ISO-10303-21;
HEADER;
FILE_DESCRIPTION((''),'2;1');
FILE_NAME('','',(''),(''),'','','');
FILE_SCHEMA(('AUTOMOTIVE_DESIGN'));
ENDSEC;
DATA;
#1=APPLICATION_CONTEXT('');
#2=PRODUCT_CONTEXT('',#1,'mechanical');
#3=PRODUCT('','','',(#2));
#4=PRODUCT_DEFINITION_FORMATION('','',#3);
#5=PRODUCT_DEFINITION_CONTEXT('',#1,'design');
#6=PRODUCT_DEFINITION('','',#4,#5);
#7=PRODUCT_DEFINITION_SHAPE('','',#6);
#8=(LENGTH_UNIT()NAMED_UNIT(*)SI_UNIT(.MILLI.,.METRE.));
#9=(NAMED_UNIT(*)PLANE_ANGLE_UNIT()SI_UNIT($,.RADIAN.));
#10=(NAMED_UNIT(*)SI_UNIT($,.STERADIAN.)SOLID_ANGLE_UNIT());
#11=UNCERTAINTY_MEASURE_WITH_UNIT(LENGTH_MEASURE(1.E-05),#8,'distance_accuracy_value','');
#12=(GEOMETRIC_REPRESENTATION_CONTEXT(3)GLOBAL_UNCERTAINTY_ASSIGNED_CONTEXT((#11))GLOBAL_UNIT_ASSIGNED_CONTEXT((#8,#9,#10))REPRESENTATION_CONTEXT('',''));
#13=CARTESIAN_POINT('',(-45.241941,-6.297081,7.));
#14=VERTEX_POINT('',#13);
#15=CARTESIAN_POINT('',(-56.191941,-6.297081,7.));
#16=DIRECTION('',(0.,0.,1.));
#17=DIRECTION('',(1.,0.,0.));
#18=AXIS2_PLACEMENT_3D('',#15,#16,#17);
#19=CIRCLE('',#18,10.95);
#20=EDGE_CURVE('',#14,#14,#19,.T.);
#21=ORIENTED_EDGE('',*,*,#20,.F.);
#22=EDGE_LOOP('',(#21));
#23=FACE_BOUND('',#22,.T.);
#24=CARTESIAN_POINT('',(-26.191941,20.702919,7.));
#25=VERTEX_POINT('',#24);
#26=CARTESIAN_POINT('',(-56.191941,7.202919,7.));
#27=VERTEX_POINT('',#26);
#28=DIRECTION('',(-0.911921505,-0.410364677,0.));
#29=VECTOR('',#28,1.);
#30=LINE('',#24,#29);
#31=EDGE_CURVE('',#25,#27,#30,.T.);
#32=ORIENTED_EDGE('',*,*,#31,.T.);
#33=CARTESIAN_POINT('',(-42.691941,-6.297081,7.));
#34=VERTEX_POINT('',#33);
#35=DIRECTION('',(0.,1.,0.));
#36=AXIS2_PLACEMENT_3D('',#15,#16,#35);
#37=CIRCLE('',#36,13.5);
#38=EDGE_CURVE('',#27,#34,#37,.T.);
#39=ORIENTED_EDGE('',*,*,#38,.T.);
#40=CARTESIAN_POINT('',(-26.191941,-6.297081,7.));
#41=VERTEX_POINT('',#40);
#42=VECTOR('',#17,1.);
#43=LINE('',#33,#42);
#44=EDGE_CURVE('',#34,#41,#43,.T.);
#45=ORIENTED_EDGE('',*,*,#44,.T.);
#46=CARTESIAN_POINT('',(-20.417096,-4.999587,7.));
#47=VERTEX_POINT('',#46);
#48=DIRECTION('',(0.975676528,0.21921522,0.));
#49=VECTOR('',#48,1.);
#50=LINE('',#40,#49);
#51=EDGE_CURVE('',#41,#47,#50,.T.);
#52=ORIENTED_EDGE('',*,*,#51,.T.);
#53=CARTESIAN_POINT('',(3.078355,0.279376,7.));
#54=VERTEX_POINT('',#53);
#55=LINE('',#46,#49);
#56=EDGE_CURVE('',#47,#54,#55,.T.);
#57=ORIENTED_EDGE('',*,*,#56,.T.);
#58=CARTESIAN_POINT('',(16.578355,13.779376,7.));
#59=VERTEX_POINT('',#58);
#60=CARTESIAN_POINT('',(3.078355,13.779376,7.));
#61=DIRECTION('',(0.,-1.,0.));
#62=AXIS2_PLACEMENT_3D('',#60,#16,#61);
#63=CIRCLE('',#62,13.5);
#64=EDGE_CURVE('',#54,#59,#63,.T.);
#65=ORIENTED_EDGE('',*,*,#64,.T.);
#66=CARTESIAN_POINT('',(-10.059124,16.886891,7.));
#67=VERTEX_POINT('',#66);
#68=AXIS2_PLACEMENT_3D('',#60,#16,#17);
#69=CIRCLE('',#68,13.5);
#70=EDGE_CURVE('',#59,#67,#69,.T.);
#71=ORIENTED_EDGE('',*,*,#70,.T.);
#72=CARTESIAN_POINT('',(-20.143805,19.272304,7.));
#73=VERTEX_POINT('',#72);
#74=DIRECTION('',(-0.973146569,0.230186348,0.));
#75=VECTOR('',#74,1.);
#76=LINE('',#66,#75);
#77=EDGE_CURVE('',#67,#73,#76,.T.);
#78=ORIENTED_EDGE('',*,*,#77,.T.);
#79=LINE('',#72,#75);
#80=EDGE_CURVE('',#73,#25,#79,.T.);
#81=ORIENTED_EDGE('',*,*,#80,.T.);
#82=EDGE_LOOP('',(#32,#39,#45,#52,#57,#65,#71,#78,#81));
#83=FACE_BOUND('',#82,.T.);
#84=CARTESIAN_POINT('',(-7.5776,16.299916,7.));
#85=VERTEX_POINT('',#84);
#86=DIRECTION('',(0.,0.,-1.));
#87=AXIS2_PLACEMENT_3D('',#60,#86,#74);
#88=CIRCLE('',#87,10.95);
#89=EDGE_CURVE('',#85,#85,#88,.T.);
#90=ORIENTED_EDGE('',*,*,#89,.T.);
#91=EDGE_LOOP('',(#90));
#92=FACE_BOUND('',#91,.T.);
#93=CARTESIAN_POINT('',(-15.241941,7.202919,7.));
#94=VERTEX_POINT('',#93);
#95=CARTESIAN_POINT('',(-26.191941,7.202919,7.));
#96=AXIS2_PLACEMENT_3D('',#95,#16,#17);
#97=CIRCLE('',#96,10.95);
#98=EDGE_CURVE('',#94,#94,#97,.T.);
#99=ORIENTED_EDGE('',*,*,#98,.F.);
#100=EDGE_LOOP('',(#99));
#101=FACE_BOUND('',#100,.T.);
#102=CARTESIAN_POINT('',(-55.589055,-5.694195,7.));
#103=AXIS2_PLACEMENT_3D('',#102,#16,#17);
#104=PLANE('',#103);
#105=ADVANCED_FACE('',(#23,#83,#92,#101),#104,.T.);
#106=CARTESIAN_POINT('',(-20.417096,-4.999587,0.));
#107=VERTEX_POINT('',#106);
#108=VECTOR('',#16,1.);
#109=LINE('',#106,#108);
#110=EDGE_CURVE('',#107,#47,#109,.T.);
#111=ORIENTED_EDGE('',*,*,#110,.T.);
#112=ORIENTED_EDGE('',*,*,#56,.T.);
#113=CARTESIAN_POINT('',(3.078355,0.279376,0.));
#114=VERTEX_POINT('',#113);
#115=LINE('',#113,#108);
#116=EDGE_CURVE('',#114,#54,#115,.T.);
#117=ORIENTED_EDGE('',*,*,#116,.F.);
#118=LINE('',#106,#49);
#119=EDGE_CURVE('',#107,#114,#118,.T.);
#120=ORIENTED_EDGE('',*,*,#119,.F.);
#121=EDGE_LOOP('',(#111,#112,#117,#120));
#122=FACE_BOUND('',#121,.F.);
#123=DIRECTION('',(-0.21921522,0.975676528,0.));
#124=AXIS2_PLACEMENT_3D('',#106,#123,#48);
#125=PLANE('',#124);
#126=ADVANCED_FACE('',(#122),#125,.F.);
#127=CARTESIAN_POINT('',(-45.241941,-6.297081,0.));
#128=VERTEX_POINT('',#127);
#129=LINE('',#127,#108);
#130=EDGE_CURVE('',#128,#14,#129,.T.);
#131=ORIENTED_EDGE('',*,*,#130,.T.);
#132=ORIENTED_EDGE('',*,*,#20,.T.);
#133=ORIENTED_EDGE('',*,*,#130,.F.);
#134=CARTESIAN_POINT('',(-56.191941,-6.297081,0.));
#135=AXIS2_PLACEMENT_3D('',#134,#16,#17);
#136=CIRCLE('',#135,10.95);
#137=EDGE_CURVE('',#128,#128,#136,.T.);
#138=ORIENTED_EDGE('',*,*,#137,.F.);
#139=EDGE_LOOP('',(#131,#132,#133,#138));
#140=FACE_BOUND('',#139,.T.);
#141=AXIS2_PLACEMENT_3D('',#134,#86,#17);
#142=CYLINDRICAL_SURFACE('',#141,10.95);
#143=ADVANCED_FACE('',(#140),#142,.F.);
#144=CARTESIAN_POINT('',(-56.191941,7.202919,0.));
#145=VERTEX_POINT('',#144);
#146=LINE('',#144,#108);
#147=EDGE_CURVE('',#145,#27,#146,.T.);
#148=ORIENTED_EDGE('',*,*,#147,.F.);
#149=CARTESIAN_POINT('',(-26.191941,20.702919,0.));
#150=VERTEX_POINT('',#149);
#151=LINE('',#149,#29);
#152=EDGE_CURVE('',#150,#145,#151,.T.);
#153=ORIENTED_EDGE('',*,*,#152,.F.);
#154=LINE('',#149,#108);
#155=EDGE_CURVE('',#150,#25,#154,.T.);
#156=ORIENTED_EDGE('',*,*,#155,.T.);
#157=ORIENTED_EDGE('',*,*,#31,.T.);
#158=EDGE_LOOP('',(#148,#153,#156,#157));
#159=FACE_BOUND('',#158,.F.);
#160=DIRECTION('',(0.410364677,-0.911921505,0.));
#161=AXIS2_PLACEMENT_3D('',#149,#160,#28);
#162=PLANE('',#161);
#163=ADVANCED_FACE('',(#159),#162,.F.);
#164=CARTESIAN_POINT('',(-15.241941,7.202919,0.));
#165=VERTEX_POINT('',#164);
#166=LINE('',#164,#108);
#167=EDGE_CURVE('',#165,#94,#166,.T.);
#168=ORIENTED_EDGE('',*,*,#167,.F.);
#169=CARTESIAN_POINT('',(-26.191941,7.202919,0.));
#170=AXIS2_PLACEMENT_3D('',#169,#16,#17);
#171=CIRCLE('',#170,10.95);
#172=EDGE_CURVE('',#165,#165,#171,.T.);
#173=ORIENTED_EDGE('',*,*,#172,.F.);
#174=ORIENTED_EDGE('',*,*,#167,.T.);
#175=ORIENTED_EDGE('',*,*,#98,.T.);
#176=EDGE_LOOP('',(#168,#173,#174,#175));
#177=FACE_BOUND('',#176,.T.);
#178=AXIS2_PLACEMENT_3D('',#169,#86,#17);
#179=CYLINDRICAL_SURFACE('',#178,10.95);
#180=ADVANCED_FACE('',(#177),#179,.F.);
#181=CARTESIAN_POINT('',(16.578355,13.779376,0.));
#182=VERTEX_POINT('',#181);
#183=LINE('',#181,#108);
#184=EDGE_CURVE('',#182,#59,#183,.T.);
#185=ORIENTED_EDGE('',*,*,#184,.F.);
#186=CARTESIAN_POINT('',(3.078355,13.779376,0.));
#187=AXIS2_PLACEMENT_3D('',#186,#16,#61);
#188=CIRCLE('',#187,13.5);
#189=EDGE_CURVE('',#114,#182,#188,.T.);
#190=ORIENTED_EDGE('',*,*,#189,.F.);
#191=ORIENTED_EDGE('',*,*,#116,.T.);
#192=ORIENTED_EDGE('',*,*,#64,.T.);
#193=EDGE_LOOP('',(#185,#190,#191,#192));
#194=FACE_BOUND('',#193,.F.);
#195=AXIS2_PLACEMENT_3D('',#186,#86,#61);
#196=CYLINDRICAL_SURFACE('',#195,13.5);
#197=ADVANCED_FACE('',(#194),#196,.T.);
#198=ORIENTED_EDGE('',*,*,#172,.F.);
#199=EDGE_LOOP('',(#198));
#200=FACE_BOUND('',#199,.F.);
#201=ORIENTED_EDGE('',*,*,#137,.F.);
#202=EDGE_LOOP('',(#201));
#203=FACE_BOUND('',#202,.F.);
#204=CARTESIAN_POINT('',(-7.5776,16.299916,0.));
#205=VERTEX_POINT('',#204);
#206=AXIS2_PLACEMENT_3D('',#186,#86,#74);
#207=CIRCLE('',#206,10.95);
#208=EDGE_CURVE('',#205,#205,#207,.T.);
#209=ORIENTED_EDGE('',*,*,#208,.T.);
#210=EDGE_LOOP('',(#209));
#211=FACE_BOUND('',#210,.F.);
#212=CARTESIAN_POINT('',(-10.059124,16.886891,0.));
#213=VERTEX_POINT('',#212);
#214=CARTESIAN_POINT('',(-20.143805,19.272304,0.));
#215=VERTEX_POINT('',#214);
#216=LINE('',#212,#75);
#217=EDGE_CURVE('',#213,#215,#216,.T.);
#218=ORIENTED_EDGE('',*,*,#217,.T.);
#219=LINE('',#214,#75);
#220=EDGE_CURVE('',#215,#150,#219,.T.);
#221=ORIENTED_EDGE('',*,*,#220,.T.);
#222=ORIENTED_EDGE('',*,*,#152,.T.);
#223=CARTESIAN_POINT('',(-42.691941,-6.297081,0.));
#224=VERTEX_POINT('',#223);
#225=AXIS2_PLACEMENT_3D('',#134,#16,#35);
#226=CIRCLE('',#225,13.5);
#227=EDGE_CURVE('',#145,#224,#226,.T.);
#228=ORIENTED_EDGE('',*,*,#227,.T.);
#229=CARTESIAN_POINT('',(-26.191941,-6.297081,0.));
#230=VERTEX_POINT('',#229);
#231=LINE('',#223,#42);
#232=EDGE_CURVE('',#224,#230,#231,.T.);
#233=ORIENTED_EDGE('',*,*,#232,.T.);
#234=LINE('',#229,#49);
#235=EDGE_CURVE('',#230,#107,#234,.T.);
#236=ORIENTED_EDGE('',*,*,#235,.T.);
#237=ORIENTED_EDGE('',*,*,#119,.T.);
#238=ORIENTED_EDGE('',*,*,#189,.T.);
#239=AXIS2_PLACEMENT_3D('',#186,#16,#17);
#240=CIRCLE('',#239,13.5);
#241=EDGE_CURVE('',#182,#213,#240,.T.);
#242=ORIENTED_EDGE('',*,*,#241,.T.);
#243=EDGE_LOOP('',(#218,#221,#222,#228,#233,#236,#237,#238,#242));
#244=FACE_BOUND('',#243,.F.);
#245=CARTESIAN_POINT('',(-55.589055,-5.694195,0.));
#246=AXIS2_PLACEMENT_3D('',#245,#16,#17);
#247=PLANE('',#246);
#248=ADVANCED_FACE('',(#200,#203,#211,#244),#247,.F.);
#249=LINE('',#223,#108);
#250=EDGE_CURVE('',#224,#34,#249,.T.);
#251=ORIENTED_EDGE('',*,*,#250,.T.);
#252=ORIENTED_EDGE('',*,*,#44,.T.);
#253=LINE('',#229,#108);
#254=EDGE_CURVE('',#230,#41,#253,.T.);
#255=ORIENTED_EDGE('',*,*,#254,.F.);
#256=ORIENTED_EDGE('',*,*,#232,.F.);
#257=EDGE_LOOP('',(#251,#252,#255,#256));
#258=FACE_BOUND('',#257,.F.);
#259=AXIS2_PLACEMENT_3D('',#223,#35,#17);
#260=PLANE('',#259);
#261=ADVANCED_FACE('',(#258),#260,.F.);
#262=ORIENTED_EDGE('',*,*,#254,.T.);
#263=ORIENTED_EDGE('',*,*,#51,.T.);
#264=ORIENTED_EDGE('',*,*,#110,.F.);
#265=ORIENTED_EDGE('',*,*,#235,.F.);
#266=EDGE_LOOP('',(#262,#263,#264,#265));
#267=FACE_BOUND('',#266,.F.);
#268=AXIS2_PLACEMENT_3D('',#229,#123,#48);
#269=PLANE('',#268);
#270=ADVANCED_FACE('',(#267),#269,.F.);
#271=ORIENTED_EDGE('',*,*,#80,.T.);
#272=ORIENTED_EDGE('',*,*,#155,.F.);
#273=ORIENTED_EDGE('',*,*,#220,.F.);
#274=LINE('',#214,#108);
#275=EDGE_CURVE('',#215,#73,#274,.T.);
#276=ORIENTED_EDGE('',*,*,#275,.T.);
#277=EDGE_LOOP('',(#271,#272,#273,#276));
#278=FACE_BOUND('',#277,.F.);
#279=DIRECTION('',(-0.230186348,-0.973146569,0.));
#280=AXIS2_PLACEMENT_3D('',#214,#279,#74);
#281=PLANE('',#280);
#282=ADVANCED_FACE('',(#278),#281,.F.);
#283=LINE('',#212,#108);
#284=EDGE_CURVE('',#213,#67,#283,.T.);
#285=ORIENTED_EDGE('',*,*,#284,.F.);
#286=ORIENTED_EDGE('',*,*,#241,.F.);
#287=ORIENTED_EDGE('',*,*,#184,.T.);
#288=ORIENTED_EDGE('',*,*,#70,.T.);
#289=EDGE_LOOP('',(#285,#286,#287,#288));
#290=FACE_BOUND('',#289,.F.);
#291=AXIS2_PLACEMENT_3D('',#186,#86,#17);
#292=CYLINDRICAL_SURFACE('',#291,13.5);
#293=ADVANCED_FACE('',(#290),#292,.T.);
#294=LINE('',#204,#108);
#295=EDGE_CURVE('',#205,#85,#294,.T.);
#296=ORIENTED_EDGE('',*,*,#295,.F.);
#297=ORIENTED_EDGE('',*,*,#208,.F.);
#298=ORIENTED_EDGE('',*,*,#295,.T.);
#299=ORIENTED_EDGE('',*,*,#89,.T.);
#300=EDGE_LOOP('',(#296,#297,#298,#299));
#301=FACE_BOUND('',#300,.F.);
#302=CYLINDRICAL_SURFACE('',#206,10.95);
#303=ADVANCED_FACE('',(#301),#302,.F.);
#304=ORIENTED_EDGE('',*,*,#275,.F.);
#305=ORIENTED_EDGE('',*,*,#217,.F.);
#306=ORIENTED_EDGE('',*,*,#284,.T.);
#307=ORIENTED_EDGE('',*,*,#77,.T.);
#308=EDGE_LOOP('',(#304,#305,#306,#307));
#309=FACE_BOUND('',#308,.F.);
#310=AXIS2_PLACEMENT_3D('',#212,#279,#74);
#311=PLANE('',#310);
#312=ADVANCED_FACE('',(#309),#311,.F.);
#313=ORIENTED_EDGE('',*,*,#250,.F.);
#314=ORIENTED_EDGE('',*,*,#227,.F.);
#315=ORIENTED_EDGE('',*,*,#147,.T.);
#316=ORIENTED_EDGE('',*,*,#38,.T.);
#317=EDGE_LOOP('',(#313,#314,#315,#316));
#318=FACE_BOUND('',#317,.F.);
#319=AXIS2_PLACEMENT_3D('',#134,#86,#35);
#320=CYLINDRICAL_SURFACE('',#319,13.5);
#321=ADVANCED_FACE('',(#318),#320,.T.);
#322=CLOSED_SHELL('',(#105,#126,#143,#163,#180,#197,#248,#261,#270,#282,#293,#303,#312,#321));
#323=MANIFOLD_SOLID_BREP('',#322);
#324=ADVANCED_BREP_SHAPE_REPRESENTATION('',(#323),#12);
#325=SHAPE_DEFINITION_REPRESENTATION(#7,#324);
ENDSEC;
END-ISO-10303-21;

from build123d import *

# Parameters (mm, degrees)
F0_R     = 10.95
F1_DEPTH = 7


# Not quite as in the source:
# - a feature names something its author has since deleted; it is built from what else it names


with BuildPart() as f1:
    # F0 (on Top) → F1 (new body)
    with BuildSketch(Plane.XY):
        with BuildLine():
            ThreePointArc((-56.191941013, 7.2029190708), (-65.7378825591, -15.8430224752), (-42.691941013, -6.2970809292))
            ThreePointArc((-42.691941013, -6.2970809292), (-46.645999467, 3.2488606168), (-56.191941013, 7.2029190708))
        make_face()
        with Locations((-56.191941013, -6.2970809292)):
            Circle(F0_R, mode=Mode.SUBTRACT)
        with BuildLine():
            Line((-42.691941013, -6.2970809292), (-26.191941013, -6.2970809292))
            ThreePointArc((-26.191941013, -6.2970809292), (-38.5028813329, 1.6629959269), (-36.295891117, 16.156141524))
            Line((-36.295891117, 16.156141524), (-56.191941013, 7.2029190708))
            ThreePointArc((-56.191941013, 7.2029190708), (-46.645999467, 3.2488606168), (-42.691941013, -6.2970809292))
        make_face()
        with BuildLine():
            ThreePointArc((-20.4170961141, -4.9995874911), (-14.7855742353, -0.0182163615), (-12.691941013, 7.2029190708))
            ThreePointArc((-12.691941013, 7.2029190708), (-14.704995322, 14.295173909), (-20.1438045227, 19.2723036862))
            Line((-20.1438045227, 19.2723036862), (-26.191941013, 20.7029190708))
            Line((-26.191941013, 20.7029190708), (-36.295891117, 16.156141524))
            ThreePointArc((-36.295891117, 16.156141524), (-38.5028813329, 1.6629959269), (-26.191941013, -6.2970809292))
            Line((-26.191941013, -6.2970809292), (-20.4170961141, -4.9995874911))
        make_face()
        with Locations((-26.191941013, 7.2029190708)):
            Circle(F0_R, mode=Mode.SUBTRACT)
        with BuildLine():
            ThreePointArc((-20.1438045227, 19.2723036862), (-14.704995322, 14.295173909), (-12.691941013, 7.2029190708))
            ThreePointArc((-12.691941013, 7.2029190708), (-14.7855742353, -0.0182163615), (-20.4170961141, -4.9995874911))
            Line((-20.4170961141, -4.9995874911), (3.0783548298, 0.27937566))
            ThreePointArc((3.0783548298, 0.27937566), (-7.5094084371, 5.4038596161), (-10.0591238534, 16.8868913633))
            Line((-10.0591238534, 16.8868913633), (-20.1438045227, 19.2723036862))
        make_face()
        with BuildLine():
            ThreePointArc((16.5783548298, 13.77937566), (4.6426498429, 27.1884390543), (-10.0591238534, 16.8868913633))
            ThreePointArc((-10.0591238534, 16.8868913633), (-7.5094084371, 5.4038596161), (3.0783548298, 0.27937566))
            ThreePointArc((3.0783548298, 0.27937566), (12.6242963759, 4.233434114), (16.5783548298, 13.77937566))
        make_face()
        with BuildLine():
            ThreePointArc((14.0283548298, 13.77937566), (1.8095377637, 2.9031353513), (-7.5776001022, 16.2999161749))
            ThreePointArc((-7.5776001022, 16.2999161749), (4.347171896, 24.6556159687), (14.0283548298, 13.77937566))
        make_face(mode=Mode.SUBTRACT)
    extrude(amount=F1_DEPTH)


solid = f1.part
